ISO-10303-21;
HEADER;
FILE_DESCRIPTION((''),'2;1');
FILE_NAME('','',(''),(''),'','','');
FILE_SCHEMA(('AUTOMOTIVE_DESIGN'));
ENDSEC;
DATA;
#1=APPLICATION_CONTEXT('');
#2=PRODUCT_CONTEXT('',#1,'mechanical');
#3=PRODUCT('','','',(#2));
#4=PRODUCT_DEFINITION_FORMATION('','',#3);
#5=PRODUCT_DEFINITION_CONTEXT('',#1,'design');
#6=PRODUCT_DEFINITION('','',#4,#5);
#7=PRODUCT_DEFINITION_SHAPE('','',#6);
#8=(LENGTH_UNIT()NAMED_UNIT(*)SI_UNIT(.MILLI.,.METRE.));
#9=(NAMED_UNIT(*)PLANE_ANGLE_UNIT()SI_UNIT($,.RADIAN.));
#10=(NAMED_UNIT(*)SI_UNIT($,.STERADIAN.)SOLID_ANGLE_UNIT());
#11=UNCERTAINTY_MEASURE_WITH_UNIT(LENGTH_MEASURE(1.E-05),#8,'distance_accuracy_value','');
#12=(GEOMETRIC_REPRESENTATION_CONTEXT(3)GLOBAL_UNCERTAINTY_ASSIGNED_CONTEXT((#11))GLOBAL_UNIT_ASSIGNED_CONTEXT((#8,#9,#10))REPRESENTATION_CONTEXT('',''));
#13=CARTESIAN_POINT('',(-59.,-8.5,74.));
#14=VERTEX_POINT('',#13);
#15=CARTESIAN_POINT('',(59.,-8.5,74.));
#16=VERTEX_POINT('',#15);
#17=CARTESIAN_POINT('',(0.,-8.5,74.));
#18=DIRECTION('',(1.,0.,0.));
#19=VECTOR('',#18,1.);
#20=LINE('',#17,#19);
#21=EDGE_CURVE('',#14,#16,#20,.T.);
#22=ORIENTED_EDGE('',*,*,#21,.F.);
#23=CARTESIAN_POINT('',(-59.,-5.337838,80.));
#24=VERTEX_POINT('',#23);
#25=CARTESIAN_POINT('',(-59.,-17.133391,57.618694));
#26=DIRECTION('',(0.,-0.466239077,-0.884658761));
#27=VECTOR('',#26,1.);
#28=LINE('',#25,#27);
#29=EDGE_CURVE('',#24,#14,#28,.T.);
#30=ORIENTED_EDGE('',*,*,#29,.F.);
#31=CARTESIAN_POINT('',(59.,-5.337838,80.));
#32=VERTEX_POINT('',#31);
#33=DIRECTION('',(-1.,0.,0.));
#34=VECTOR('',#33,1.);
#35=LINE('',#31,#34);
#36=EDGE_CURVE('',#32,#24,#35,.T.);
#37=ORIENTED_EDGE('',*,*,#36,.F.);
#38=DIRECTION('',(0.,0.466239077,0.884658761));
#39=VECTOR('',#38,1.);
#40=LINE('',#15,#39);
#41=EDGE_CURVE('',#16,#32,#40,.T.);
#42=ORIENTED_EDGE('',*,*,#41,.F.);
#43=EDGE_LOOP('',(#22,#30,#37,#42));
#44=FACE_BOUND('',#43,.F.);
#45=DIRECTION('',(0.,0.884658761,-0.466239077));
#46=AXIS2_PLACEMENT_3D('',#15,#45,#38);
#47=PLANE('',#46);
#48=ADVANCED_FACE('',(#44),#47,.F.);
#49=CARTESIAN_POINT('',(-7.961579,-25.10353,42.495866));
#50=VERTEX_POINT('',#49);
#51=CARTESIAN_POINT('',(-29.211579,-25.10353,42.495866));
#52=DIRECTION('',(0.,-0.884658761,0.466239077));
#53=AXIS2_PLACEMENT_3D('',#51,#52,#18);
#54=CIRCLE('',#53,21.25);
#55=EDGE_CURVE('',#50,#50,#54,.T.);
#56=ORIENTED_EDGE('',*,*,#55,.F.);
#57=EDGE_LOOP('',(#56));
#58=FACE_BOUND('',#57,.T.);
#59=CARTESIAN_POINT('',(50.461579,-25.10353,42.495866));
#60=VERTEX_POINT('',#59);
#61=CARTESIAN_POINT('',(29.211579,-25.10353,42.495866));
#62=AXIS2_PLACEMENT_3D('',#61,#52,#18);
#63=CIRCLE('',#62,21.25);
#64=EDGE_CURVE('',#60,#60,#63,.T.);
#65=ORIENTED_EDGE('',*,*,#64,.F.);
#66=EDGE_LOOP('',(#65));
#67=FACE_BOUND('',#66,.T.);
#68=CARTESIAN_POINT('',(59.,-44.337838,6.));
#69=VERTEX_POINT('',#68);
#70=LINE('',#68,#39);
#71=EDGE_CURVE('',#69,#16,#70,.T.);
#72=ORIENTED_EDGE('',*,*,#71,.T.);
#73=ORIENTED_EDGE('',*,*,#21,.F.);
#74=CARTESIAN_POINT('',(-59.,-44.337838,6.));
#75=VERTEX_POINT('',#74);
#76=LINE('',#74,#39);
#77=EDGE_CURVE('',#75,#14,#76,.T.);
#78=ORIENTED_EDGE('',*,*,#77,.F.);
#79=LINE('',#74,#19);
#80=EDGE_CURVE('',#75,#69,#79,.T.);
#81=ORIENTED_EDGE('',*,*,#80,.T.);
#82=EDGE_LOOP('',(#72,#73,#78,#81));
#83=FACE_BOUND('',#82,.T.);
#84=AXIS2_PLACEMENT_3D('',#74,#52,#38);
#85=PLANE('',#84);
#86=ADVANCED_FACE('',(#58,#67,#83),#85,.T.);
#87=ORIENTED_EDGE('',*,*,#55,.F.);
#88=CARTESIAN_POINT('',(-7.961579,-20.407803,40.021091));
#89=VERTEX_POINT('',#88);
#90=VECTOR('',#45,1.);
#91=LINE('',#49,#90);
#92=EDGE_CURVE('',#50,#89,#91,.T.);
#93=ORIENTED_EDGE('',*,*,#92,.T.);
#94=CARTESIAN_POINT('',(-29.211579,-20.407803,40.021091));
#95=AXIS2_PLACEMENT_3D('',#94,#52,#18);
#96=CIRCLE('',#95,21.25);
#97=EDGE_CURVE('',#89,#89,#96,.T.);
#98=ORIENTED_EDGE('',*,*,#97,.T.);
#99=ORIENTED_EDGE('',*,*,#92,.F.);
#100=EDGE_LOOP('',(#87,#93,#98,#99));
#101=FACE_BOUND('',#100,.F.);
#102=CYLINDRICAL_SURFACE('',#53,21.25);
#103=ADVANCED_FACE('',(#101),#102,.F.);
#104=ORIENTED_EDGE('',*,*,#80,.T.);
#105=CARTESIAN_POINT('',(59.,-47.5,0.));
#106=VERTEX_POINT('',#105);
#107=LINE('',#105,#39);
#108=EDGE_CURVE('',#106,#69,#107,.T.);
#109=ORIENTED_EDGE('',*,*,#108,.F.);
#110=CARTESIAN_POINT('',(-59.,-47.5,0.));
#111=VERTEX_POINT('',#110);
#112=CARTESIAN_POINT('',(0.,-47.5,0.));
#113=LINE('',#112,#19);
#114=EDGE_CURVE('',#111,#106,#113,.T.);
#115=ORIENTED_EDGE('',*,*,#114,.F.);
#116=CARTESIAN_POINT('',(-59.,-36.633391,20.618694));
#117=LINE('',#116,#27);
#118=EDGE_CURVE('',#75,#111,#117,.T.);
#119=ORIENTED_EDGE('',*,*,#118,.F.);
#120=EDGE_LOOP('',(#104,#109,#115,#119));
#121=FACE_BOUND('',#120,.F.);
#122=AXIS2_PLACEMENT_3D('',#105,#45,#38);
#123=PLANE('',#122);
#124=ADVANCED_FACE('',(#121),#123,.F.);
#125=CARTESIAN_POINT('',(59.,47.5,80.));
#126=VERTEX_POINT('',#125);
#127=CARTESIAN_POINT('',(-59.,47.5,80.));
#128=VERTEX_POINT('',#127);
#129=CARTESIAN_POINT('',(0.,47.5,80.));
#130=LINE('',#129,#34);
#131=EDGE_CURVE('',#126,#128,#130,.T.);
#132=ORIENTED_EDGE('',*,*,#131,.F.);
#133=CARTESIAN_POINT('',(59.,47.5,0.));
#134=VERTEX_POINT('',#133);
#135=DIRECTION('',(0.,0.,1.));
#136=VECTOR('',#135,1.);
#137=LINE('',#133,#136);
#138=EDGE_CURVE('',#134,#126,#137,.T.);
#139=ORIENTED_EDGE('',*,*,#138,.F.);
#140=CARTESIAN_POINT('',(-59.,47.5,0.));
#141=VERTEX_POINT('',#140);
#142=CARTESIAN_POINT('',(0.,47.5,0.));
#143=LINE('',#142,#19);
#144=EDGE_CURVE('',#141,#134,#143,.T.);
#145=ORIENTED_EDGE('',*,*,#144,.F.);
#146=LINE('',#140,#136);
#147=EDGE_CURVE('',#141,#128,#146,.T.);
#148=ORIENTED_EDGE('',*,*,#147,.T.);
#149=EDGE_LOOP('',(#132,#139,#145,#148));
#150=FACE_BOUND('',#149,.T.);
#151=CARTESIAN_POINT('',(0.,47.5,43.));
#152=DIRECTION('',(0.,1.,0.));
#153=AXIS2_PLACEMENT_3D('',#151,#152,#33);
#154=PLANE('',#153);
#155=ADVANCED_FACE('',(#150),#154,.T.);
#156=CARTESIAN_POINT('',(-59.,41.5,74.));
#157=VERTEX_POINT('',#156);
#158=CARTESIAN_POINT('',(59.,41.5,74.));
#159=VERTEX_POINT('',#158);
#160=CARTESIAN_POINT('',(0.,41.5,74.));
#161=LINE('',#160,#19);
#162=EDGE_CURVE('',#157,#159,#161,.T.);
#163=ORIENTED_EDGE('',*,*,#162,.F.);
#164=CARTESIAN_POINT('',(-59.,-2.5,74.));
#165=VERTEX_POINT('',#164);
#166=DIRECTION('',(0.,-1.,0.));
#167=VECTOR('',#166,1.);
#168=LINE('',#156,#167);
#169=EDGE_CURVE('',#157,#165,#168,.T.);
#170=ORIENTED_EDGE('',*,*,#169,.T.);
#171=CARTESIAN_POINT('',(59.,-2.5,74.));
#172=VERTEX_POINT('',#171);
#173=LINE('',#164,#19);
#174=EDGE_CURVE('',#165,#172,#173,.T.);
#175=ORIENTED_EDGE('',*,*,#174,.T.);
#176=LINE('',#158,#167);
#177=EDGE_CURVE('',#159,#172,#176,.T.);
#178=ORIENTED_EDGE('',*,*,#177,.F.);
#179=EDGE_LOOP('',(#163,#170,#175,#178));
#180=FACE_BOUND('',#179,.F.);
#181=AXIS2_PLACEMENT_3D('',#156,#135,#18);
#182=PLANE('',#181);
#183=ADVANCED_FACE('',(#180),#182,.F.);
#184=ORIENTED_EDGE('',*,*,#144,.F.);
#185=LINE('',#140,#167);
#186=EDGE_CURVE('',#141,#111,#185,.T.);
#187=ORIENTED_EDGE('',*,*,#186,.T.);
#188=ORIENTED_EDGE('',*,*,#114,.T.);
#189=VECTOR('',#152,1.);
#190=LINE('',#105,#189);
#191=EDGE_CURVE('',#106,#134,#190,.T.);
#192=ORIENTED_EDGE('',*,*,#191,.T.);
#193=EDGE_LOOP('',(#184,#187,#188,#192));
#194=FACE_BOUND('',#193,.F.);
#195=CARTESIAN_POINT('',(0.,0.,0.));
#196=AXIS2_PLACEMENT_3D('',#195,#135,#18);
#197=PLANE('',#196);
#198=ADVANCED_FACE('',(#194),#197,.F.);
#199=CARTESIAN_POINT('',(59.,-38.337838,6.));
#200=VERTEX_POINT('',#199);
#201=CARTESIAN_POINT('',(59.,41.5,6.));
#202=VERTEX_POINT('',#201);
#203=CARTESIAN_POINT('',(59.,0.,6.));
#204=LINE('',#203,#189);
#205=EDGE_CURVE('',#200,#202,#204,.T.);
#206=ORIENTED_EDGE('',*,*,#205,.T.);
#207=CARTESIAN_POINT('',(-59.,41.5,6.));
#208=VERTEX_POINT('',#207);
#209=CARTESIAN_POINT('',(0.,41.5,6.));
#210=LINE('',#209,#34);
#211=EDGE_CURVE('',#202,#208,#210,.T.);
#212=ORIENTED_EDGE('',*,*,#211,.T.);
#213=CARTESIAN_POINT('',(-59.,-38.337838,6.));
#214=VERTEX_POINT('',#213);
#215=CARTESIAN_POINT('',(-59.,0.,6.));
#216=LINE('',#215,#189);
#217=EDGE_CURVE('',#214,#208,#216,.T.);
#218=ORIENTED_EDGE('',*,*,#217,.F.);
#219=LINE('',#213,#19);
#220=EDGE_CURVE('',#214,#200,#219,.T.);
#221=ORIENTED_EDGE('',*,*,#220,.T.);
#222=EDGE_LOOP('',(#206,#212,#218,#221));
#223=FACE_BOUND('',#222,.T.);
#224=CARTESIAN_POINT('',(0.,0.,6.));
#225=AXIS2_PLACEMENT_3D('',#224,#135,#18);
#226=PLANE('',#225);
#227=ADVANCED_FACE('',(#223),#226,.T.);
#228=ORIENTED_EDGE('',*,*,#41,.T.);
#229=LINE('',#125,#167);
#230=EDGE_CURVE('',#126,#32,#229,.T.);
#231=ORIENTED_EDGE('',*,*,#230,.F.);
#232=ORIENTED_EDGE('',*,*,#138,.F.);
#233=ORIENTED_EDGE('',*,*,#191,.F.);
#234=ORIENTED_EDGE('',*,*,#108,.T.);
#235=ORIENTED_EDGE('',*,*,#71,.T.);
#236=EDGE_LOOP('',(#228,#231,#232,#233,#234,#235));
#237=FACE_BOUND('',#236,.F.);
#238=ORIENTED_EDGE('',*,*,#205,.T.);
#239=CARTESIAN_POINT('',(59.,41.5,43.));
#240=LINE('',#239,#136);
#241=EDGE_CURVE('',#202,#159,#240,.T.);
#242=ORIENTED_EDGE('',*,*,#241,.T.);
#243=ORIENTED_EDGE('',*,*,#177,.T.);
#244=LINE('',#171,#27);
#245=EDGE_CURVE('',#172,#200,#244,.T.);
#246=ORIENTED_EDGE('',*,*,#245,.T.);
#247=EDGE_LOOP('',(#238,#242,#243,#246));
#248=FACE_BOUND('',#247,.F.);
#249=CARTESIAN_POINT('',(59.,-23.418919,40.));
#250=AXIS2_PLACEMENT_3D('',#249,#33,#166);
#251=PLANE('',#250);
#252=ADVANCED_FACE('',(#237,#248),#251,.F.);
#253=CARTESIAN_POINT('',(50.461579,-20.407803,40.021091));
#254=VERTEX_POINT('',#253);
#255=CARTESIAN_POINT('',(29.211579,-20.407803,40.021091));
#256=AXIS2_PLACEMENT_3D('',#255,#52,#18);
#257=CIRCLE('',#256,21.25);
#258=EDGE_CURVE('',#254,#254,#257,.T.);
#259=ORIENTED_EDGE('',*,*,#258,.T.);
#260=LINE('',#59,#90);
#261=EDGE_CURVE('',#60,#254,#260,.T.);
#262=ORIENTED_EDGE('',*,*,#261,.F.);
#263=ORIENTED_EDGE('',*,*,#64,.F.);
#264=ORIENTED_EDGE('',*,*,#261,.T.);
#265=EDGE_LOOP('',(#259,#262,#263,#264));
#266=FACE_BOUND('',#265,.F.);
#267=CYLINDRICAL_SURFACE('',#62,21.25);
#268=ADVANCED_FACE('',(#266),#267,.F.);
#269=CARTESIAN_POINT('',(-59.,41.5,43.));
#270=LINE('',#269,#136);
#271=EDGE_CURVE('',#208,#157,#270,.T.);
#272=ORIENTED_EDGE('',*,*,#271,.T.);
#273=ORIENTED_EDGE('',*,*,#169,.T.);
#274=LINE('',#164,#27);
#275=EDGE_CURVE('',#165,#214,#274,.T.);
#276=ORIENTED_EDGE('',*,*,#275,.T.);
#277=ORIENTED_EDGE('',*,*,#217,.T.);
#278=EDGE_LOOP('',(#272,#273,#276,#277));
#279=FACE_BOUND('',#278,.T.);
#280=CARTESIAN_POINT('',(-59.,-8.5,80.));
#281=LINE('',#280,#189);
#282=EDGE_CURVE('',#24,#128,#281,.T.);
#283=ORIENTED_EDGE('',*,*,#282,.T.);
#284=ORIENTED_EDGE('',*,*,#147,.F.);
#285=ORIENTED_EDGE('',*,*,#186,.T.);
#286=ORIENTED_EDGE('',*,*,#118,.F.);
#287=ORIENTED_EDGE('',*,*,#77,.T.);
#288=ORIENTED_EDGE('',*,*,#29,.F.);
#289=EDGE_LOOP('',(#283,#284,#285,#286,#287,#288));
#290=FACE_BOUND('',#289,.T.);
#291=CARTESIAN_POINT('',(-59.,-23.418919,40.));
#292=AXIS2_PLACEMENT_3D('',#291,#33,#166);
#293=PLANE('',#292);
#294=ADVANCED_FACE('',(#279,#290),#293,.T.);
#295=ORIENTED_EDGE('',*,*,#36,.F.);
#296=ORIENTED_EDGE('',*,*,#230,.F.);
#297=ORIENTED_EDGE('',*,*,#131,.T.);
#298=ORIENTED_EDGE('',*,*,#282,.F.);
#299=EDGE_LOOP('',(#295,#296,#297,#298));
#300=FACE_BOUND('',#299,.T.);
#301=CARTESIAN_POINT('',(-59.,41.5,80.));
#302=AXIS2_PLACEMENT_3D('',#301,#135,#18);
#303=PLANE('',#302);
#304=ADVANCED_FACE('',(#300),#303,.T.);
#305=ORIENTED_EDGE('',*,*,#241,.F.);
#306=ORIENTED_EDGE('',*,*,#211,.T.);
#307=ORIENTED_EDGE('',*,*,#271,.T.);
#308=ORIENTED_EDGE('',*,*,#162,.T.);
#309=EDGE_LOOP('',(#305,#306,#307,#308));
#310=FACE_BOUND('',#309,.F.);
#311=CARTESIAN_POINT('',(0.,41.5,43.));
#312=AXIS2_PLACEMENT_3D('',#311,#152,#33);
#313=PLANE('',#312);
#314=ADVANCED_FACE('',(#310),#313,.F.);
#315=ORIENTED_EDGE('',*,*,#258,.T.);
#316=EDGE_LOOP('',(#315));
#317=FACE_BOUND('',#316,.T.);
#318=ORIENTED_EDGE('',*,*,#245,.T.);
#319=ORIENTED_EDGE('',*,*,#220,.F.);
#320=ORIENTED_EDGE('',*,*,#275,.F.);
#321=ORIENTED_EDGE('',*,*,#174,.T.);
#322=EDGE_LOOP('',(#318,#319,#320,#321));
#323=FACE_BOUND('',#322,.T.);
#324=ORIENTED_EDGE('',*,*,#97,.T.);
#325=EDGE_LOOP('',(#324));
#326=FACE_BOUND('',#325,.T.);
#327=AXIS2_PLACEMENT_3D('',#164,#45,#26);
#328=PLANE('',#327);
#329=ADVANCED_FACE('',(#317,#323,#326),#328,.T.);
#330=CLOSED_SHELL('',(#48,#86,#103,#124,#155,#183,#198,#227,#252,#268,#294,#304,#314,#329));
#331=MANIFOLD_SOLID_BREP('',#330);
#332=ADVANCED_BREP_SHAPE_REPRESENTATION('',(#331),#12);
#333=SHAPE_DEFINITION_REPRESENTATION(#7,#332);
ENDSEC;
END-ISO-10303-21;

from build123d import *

# Parameters (mm, degrees)
F0_W      = 118
F0_H      = 95
F1_DEPTH  = 6
F2_W      = 118
F2_H      = 74
F3_DEPTH  = 6
F4_W      = 118
F4_H      = 6
F5_DEPTH  = 50
F7_DEPTH  = 118
F9_DEPTH  = 118.001
F11_R     = 21.25
F12_DEPTH = 5.3079525657


with BuildPart() as f1:
    # F0 (on Top) → F1 (new body)
    with BuildSketch(Plane.XY):
        Rectangle(F0_W, F0_H)
    extrude(amount=F1_DEPTH)

    # F2 (on face) → F3 (join)
    with BuildSketch(Plane(origin=(0, 47.5, 0), x_dir=(-1, 0, 0), z_dir=(0, 1, 0))):
        with Locations((0, 43)):
            Rectangle(F2_W, F2_H)
    extrude(amount=-F3_DEPTH)

    # F4 (on face) → F5 (join)
    with BuildSketch(Plane.XZ.offset(-41.5)):
        with Locations((0, 77)):
            Rectangle(F4_W, F4_H)
    extrude(amount=F5_DEPTH)

    # F6 (on face) → F7 (join)
    with BuildSketch(Plane(origin=(-59, 0, 0), x_dir=(0, -1, 0), z_dir=(-1, 0, 0))):
        Polygon((38.3378378378, 6), (44.3378378378, 6), (8.5, 74), (2.5, 74), align=None)
        Polygon((2.5, 74), (8.5, 74), (5.3378378378, 80), (-0.6621621622, 80), align=None)
        Polygon((41.5, 0), (47.5, 0), (44.3378378378, 6), (38.3378378378, 6), align=None)
    extrude(amount=-F7_DEPTH)

    # F8 (on face) → F9 (cut, through all)
    with BuildSketch(Plane.YZ.offset(59)):
        Polygon((-47.5, 6), (-47.5, 0), (-44.3378378378, 6), align=None)
        Polygon((-8.5, 80), (-8.5, 74), (-5.3378378378, 80), align=None)
    extrude(amount=-F9_DEPTH, mode=Mode.SUBTRACT)

    # F11 (on face) → F12 (cut, through all)
    with BuildSketch(Plane(origin=(0, -37.1745033586, 19.5919679863), x_dir=(1, 0, 0), z_dir=(0, -0.884658761, 0.4662390767))):
        with Locations((-29.2115788907, 25.8900932968)):
            Circle(F11_R)
        with Locations((29.2115788907, 25.8900932968)):
            Circle(F11_R)
    extrude(amount=-F12_DEPTH, mode=Mode.SUBTRACT)


solid = f1.part
